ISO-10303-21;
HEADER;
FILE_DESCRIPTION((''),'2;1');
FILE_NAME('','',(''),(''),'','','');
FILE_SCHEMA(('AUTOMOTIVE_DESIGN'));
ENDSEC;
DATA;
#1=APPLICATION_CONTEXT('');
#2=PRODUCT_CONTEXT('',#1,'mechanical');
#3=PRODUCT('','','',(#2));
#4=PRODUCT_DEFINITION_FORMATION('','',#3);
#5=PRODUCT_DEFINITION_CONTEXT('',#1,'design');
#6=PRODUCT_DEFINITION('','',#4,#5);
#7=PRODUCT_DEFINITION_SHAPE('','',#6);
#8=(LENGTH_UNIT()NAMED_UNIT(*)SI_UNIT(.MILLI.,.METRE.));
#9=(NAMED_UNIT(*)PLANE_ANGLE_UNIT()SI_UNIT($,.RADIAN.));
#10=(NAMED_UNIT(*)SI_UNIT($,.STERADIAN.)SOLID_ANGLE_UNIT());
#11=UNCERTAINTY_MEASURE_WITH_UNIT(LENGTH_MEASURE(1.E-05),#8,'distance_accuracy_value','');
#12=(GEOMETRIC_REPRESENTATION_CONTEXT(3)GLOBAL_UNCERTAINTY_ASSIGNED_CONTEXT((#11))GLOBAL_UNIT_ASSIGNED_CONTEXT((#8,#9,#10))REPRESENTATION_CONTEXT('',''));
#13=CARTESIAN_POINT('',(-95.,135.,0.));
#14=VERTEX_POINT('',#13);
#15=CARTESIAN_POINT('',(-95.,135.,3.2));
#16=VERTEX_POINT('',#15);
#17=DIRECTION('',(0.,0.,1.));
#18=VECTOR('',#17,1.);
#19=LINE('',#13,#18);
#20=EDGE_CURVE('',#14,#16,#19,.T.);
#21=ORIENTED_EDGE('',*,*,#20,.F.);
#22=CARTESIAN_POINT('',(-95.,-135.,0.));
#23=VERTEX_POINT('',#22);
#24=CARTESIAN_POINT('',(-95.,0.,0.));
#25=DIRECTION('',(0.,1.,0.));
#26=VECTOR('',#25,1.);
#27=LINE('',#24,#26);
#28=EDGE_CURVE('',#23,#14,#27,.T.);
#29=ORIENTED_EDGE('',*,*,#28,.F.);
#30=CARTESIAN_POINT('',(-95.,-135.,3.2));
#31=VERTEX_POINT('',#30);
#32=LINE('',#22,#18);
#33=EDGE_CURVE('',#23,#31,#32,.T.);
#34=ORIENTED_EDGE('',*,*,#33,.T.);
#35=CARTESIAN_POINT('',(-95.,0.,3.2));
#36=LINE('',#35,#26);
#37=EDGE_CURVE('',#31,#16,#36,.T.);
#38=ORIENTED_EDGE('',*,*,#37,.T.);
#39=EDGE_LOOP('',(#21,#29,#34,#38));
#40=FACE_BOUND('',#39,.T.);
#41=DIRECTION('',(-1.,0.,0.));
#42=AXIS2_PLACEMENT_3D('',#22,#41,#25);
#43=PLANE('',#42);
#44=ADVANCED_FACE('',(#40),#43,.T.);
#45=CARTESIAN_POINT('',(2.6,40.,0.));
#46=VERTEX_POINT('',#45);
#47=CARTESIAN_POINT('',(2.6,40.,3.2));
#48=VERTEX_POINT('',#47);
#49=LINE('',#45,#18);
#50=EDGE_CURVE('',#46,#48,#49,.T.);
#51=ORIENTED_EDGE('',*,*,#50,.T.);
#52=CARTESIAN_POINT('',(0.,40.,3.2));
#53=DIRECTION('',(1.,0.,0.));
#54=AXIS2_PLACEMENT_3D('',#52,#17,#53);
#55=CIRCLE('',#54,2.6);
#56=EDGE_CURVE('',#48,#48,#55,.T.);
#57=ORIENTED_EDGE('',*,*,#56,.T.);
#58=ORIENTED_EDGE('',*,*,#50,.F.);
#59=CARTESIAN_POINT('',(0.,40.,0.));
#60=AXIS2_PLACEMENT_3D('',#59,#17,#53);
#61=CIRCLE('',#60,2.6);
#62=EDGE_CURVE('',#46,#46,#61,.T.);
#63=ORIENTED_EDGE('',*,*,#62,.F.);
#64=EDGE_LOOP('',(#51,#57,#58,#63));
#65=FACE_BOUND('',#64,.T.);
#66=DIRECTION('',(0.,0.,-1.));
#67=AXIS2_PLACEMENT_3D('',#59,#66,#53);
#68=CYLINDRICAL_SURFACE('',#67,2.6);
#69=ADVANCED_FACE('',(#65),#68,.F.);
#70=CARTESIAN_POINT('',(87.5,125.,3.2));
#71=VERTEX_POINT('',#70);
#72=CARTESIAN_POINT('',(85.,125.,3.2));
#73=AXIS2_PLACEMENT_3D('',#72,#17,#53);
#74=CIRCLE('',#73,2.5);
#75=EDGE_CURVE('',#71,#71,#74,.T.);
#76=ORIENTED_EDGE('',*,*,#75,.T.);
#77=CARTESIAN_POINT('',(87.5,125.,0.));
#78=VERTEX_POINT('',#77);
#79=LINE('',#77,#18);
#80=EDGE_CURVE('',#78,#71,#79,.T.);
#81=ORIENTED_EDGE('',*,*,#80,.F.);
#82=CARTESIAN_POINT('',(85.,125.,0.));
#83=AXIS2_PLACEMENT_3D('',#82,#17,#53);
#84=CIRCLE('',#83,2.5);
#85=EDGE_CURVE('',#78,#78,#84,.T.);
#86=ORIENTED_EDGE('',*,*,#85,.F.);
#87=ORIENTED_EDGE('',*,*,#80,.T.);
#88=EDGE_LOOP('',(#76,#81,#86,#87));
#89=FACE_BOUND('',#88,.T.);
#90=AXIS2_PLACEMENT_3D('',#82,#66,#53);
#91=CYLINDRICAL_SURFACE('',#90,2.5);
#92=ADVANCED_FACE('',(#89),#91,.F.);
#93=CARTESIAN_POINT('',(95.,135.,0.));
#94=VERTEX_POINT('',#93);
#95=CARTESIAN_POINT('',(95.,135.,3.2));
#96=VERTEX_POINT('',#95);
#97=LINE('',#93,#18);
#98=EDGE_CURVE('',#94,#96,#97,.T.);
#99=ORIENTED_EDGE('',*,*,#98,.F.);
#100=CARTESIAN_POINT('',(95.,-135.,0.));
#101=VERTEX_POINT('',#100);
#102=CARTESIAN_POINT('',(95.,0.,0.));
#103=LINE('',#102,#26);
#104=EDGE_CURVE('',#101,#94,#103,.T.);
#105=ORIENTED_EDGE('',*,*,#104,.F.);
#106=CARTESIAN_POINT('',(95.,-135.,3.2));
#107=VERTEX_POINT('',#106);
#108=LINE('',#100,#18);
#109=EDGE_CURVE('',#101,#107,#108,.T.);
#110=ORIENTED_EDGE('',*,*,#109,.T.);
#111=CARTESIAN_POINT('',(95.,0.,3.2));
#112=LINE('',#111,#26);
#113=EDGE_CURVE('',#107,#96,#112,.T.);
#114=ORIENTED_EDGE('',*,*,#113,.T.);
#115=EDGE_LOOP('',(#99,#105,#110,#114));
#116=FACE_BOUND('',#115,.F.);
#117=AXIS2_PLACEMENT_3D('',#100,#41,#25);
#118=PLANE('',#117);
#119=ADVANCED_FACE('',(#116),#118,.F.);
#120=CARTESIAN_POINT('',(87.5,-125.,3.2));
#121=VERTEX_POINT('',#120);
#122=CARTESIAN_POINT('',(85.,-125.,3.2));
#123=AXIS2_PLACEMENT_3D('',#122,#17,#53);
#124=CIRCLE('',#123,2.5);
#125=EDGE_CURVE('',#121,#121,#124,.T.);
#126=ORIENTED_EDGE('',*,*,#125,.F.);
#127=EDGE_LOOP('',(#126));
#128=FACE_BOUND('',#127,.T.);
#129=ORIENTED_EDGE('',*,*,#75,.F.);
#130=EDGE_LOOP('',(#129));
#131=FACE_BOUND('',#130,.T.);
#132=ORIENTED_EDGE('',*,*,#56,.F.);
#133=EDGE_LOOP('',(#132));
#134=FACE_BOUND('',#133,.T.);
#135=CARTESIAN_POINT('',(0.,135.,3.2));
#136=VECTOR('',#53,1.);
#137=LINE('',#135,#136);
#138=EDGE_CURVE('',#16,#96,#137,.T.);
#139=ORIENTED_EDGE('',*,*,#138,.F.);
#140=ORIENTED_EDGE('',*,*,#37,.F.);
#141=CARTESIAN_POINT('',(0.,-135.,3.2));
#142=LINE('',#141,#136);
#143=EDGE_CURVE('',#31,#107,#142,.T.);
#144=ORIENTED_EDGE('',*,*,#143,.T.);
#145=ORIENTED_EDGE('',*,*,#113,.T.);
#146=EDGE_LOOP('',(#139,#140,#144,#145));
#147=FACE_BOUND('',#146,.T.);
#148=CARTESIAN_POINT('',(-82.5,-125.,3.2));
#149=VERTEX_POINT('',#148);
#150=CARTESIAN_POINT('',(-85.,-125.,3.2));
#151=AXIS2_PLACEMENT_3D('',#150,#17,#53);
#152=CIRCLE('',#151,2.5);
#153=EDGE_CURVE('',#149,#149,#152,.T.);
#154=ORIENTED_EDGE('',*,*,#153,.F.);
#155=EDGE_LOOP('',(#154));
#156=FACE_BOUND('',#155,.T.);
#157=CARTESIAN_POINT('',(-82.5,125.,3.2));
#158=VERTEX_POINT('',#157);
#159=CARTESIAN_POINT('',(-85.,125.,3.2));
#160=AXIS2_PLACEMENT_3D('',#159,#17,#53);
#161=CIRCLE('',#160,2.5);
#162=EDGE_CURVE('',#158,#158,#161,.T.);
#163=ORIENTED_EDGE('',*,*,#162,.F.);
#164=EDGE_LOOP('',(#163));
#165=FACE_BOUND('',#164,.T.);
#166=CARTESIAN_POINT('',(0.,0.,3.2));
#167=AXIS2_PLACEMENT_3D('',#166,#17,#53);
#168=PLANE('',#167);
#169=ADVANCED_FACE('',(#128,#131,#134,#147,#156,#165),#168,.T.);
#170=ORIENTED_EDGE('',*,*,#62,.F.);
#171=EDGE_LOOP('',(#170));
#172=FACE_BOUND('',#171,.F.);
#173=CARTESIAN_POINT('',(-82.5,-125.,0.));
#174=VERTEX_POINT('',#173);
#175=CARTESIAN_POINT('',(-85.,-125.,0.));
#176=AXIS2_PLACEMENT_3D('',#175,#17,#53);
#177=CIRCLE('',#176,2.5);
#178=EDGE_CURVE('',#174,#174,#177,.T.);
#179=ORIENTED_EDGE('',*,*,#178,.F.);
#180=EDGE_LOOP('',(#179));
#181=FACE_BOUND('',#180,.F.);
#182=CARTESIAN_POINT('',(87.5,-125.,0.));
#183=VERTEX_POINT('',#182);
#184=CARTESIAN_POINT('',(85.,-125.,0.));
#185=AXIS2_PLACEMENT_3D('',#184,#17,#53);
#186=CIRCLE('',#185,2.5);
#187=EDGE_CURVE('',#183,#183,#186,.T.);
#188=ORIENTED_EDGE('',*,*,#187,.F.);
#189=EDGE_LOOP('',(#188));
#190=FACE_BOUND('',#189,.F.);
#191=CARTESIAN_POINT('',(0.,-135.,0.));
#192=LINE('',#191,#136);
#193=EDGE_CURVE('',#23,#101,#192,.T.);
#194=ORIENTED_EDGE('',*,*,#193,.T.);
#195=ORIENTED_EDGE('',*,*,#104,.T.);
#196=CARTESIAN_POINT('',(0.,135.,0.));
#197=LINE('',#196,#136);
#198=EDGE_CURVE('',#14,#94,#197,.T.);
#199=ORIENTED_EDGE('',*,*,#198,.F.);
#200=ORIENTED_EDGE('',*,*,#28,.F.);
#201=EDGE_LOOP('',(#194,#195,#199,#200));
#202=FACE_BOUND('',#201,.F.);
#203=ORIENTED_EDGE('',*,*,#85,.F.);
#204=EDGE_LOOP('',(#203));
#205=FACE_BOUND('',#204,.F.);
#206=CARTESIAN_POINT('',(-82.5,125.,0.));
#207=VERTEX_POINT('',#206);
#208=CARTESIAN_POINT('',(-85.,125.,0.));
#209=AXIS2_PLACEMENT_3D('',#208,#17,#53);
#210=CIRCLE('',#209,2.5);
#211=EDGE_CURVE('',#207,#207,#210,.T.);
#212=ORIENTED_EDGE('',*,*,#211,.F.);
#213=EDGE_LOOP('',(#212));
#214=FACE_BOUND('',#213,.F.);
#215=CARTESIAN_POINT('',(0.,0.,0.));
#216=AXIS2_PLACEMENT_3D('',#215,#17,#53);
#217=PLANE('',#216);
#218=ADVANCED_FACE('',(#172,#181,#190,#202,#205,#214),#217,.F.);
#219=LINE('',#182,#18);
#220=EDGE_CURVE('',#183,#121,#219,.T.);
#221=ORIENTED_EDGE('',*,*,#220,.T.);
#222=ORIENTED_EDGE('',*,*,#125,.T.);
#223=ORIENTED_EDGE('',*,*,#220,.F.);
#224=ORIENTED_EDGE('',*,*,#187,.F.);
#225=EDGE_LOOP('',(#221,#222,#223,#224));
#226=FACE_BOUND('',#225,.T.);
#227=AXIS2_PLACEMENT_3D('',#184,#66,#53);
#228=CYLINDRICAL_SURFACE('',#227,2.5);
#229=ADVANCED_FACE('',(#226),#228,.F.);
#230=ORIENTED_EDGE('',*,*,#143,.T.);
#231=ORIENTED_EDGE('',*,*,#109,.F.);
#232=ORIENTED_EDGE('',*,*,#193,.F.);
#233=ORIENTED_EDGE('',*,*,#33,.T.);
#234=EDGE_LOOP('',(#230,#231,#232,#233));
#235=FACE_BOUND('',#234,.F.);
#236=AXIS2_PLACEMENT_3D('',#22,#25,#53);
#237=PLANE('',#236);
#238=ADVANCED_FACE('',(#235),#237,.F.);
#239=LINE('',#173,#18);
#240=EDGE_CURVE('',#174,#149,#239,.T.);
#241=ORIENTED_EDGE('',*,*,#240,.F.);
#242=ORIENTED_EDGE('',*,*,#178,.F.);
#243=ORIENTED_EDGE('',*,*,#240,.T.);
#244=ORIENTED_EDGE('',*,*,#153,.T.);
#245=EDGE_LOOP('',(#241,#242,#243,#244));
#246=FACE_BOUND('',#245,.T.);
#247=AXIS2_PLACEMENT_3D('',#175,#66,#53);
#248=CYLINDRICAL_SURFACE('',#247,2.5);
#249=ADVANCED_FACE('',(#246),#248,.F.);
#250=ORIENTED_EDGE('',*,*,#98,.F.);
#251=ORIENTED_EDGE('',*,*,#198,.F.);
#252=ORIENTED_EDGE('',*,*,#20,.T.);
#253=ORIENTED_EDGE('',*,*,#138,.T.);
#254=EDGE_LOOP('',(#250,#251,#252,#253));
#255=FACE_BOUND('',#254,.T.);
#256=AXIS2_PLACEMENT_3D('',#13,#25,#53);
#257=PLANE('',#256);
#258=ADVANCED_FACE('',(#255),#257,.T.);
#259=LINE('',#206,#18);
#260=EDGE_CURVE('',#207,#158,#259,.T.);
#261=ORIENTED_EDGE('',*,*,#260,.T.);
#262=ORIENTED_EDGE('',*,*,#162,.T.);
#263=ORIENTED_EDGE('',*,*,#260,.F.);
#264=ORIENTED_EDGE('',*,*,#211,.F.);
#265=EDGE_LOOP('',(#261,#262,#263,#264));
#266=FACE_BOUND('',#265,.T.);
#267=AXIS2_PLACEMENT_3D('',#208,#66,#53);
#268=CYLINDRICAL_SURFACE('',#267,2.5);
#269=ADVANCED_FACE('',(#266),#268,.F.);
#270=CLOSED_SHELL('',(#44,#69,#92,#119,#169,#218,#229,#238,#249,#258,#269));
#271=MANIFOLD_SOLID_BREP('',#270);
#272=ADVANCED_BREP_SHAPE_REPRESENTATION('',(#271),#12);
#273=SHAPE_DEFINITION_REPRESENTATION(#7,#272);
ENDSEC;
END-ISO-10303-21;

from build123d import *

# Parameters (mm, degrees)
F0_W     = 190
F0_H     = 270
F0_R     = 2.5
F0_R_2   = 80
F0_R_3   = 2.6
F1_DEPTH = 3.2


# Not quite as in the source:
# - a feature names something its author has since deleted; it is built from what else it names


with BuildPart() as f1:
    # F0 (on Top) → F1 (new body)
    with BuildSketch(Plane.XY):
        Rectangle(F0_W, F0_H)
        with Locations((-85, -125)):
            Circle(F0_R, mode=Mode.SUBTRACT)
        with Locations((85, -125)):
            Circle(F0_R, mode=Mode.SUBTRACT)
        with Locations((-85, 125)):
            Circle(F0_R, mode=Mode.SUBTRACT)
        with Locations((0, 40)):
            Circle(F0_R_2, mode=Mode.SUBTRACT)
        with Locations((85, 125)):
            Circle(F0_R, mode=Mode.SUBTRACT)
        with Locations((0, 40)):
            Circle(F0_R_2)
        with Locations((0, 40)):
            Circle(F0_R_3, mode=Mode.SUBTRACT)
    extrude(amount=F1_DEPTH)


solid = f1.part
